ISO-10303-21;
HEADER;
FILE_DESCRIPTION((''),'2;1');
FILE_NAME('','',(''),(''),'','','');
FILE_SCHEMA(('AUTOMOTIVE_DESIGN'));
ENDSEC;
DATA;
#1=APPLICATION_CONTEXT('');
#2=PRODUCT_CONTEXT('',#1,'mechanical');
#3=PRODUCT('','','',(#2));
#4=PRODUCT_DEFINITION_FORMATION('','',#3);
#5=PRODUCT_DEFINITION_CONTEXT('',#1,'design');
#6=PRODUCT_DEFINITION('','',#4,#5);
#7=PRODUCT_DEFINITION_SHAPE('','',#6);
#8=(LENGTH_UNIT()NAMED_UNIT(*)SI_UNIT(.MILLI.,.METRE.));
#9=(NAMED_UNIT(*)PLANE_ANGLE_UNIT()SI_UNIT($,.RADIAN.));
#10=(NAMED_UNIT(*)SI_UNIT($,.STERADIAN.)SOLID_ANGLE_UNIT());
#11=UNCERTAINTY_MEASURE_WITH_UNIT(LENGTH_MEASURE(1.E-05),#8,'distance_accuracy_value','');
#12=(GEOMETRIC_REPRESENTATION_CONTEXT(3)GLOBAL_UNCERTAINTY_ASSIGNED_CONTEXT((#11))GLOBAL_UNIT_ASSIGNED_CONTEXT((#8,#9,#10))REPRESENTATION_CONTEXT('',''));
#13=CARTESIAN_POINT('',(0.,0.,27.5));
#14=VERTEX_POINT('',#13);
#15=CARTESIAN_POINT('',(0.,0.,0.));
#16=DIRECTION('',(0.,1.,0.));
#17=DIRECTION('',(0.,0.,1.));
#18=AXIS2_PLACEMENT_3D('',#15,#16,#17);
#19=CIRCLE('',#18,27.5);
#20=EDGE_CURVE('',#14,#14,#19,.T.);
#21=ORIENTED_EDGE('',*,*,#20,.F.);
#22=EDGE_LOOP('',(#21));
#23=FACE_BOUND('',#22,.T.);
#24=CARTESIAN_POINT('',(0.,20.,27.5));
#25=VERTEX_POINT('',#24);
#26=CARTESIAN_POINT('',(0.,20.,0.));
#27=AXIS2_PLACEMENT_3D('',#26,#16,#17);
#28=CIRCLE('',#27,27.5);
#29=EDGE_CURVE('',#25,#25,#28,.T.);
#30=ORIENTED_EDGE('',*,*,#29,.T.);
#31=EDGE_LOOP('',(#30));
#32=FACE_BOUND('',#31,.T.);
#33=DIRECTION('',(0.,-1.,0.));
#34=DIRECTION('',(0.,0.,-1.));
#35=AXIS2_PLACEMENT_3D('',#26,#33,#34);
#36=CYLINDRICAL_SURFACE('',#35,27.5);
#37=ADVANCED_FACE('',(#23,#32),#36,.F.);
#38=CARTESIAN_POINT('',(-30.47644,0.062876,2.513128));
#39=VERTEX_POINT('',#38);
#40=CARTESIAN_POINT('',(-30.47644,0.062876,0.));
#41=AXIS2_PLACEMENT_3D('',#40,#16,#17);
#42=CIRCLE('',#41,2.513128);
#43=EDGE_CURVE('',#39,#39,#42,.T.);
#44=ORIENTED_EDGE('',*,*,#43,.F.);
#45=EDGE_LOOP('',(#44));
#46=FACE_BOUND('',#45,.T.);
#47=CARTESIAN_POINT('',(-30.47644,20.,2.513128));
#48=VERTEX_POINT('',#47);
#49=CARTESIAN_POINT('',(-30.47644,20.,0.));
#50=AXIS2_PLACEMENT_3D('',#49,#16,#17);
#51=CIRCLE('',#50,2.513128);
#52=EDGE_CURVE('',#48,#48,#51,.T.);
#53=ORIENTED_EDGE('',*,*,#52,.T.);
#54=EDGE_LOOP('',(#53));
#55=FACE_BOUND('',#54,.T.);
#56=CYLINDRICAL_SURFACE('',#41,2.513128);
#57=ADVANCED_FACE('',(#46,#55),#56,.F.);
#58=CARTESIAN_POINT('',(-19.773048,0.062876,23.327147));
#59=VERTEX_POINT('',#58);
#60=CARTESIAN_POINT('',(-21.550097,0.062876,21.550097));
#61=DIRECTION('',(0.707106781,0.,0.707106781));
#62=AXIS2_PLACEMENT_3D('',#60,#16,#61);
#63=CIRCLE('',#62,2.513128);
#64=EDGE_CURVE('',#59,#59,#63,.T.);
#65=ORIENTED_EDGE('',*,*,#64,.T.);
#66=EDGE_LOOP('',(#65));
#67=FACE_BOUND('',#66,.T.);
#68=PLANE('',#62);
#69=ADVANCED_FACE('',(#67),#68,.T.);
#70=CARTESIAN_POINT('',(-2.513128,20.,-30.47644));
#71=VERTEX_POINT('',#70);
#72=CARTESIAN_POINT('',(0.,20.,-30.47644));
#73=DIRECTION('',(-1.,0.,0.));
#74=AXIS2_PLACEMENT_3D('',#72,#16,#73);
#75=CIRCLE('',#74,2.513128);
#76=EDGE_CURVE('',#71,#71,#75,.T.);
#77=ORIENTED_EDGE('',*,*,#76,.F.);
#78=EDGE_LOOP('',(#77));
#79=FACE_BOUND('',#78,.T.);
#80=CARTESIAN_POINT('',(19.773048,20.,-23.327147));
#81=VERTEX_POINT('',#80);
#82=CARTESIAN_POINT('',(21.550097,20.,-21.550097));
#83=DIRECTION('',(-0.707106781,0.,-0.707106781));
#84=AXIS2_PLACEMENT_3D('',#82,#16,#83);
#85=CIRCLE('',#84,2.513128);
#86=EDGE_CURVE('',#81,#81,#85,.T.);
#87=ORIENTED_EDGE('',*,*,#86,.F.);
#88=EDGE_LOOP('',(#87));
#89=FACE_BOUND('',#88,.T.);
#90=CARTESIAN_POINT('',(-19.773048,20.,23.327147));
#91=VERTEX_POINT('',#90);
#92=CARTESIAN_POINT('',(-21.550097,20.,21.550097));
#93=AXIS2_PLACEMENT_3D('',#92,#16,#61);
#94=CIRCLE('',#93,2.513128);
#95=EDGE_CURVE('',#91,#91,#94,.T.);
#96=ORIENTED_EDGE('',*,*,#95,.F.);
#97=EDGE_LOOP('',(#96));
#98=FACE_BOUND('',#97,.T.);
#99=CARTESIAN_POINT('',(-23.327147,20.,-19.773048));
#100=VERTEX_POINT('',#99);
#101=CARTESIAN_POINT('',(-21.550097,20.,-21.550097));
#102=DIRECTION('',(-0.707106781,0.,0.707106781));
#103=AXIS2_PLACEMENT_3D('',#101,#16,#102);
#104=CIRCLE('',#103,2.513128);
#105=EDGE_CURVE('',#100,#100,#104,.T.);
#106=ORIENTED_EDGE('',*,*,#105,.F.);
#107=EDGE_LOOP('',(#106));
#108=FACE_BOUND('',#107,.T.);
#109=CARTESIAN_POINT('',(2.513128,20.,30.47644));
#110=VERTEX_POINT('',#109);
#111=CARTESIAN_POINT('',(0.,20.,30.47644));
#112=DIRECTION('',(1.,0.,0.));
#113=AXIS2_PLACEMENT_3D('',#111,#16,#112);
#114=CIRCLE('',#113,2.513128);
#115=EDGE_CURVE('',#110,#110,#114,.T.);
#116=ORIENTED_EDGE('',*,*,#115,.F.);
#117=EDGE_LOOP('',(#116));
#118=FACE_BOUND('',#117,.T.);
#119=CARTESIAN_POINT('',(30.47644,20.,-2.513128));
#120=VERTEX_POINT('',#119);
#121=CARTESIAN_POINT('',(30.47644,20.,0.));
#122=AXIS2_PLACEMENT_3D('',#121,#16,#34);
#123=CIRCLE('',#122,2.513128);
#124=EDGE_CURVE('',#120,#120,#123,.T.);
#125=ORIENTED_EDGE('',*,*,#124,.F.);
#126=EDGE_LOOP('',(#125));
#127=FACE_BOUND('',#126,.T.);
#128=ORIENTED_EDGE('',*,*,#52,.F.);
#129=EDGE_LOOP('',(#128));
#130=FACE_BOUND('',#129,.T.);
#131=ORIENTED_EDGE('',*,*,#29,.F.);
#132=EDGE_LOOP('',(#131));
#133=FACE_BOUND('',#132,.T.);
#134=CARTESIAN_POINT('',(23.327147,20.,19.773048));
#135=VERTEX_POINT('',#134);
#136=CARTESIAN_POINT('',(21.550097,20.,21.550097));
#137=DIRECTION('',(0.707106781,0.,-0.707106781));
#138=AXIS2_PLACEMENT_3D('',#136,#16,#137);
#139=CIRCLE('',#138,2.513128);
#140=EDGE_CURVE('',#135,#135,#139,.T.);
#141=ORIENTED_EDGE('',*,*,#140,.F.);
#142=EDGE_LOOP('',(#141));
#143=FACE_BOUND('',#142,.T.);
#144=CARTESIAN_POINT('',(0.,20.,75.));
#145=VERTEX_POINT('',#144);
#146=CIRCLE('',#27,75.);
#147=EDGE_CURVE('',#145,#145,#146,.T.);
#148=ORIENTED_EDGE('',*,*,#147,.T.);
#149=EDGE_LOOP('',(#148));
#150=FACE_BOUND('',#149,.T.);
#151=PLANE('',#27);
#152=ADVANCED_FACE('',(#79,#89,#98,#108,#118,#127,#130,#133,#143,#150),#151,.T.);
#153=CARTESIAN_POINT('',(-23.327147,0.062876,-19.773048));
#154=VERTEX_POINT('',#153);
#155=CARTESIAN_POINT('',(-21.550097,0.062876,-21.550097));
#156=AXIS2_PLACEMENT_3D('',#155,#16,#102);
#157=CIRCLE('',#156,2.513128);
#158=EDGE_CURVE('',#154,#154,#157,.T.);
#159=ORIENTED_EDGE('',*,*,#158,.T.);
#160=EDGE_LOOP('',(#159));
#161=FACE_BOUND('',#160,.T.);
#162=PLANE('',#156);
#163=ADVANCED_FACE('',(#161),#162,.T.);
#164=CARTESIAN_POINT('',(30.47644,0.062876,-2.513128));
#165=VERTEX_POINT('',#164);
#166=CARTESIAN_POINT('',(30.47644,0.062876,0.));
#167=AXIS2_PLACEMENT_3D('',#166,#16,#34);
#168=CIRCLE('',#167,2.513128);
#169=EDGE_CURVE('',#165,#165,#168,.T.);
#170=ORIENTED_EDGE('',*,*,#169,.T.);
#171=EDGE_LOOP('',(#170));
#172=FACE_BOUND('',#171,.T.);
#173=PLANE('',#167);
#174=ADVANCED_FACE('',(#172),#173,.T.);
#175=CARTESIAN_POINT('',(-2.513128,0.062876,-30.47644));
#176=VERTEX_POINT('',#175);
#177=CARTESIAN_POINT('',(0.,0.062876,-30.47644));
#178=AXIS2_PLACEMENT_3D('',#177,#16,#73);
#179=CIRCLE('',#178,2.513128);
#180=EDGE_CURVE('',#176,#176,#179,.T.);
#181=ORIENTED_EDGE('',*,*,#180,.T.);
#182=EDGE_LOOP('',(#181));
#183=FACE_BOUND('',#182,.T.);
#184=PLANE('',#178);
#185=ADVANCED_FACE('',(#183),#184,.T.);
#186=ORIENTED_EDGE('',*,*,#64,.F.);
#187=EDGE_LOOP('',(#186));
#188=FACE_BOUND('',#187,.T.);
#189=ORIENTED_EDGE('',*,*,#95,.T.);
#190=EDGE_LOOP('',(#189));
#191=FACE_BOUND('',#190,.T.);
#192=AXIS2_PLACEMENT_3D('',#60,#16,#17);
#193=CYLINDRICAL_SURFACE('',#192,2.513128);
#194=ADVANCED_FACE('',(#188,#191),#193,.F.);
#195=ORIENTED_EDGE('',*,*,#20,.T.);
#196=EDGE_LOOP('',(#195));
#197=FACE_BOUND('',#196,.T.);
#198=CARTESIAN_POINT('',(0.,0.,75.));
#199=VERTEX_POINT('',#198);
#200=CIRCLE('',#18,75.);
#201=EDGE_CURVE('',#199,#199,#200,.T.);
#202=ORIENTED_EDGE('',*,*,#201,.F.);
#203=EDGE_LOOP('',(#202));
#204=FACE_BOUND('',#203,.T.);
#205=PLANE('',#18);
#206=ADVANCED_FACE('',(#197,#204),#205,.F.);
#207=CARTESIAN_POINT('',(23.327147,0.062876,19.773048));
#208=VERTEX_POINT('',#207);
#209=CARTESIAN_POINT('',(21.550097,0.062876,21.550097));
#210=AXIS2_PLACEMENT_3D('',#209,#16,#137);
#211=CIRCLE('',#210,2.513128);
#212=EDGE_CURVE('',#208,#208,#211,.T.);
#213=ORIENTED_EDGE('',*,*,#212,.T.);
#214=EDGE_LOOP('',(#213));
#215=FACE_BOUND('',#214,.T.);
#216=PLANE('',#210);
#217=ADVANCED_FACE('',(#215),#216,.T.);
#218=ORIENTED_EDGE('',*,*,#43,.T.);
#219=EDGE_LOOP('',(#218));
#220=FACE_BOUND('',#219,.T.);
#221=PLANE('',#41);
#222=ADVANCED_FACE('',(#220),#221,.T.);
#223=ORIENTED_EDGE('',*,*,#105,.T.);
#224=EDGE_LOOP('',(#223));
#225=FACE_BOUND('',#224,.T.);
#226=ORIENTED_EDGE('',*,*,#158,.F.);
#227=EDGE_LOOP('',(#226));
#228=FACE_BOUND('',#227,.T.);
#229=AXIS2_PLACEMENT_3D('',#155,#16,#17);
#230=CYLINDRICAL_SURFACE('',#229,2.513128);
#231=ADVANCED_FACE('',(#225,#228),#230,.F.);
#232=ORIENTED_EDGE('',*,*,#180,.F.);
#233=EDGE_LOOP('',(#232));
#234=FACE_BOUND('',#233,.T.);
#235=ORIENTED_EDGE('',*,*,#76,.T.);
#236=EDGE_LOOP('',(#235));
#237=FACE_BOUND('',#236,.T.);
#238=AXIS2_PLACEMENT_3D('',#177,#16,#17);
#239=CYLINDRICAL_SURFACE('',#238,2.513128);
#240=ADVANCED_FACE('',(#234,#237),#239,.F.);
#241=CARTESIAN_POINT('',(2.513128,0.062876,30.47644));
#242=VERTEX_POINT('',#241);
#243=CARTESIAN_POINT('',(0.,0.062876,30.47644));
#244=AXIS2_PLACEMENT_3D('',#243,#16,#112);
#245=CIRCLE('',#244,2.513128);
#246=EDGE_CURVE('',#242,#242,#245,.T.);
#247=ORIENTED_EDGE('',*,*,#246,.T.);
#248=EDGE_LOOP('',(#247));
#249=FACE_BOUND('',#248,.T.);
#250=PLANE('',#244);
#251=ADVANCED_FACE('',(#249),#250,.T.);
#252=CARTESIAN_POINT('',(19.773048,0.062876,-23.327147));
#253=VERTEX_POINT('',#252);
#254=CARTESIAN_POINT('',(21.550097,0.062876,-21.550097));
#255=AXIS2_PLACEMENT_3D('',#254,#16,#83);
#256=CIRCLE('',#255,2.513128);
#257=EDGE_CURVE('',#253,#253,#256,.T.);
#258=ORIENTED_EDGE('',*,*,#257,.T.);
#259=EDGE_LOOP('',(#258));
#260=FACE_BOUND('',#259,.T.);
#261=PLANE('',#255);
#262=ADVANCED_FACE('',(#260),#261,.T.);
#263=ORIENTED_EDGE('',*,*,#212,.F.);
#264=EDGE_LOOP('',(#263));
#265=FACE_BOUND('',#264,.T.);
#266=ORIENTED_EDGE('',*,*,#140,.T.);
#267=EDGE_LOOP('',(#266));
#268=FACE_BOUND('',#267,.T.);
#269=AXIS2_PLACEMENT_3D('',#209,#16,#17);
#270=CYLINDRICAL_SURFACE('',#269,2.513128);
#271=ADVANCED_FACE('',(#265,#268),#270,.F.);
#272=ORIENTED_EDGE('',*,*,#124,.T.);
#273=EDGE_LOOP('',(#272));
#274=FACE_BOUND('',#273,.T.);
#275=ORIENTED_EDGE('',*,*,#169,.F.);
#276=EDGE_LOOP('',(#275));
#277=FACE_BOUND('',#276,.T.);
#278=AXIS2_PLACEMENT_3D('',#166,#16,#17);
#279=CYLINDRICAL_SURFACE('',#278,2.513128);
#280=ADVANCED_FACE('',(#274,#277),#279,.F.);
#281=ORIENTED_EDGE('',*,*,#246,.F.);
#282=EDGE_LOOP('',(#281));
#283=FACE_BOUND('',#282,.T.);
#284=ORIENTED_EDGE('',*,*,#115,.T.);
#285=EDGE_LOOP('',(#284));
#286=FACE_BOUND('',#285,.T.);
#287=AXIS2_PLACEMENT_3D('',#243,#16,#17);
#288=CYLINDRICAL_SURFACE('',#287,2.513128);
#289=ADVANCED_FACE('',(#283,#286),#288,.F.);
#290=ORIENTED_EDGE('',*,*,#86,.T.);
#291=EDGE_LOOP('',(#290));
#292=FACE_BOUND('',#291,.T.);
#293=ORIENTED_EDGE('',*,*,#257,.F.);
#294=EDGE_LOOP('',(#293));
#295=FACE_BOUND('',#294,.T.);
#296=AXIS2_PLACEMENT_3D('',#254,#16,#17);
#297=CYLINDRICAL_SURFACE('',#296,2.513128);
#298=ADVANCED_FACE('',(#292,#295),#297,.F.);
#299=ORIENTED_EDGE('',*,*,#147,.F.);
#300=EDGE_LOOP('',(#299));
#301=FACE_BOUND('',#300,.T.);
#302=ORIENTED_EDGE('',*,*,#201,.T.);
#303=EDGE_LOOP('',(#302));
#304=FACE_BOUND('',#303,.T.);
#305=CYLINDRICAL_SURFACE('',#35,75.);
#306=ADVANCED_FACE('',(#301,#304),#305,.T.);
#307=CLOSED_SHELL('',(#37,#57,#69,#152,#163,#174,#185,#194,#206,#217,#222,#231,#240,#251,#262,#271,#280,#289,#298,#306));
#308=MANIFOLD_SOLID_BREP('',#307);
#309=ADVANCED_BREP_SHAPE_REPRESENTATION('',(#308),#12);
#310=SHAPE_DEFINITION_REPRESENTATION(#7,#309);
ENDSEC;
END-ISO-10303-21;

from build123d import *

# Parameters (mm, degrees)
SKETCH1_R           = 75
BOSS_EXTRUDE1_DEPTH = 20
SKETCH2_R           = 27.5
CUT_EXTRUDE1_DEPTH  = 108.935165725
SKETCH3_R           = 2.513127898
CUT_EXTRUDE2_DEPTH  = 19.937124282
CIRPATTERN1_COUNT   = 8


with BuildPart() as part:
    # Sketch1 → Boss-Extrude1 (new body)
    with BuildSketch(Plane(origin=(0, 0, 0), x_dir=(1, 0, 0), z_dir=(0, 1, 0))):
        Circle(SKETCH1_R)
    extrude(amount=BOSS_EXTRUDE1_DEPTH)

    # Sketch2 → Cut-Extrude1 (cut, through all)
    with BuildSketch(Plane(origin=(0, 0, 0), x_dir=(1, 0, 0), z_dir=(0, 1, 0))):
        Circle(SKETCH2_R)
    extrude(amount=CUT_EXTRUDE1_DEPTH, mode=Mode.SUBTRACT)

    # Sketch3 → Cut-Extrude2 (cut)
    with BuildSketch(Plane(origin=(0, 20, 0), x_dir=(1, 0, 0), z_dir=(0, 1, 0))):
        with Locations((-30.476440099, 0)):
            Circle(SKETCH3_R)
    cut_extrude2 = extrude(amount=-CUT_EXTRUDE2_DEPTH, mode=Mode.SUBTRACT)

    # CirPattern1: Cut-Extrude2 ×8 about axis
    cirpattern1_axis = Axis((0, 0, 0), (0, 1, 0))
    for i in range(1, CIRPATTERN1_COUNT):
        add(cut_extrude2.rotate(cirpattern1_axis, i * 360 / CIRPATTERN1_COUNT), mode=Mode.SUBTRACT)


solid = part.part
